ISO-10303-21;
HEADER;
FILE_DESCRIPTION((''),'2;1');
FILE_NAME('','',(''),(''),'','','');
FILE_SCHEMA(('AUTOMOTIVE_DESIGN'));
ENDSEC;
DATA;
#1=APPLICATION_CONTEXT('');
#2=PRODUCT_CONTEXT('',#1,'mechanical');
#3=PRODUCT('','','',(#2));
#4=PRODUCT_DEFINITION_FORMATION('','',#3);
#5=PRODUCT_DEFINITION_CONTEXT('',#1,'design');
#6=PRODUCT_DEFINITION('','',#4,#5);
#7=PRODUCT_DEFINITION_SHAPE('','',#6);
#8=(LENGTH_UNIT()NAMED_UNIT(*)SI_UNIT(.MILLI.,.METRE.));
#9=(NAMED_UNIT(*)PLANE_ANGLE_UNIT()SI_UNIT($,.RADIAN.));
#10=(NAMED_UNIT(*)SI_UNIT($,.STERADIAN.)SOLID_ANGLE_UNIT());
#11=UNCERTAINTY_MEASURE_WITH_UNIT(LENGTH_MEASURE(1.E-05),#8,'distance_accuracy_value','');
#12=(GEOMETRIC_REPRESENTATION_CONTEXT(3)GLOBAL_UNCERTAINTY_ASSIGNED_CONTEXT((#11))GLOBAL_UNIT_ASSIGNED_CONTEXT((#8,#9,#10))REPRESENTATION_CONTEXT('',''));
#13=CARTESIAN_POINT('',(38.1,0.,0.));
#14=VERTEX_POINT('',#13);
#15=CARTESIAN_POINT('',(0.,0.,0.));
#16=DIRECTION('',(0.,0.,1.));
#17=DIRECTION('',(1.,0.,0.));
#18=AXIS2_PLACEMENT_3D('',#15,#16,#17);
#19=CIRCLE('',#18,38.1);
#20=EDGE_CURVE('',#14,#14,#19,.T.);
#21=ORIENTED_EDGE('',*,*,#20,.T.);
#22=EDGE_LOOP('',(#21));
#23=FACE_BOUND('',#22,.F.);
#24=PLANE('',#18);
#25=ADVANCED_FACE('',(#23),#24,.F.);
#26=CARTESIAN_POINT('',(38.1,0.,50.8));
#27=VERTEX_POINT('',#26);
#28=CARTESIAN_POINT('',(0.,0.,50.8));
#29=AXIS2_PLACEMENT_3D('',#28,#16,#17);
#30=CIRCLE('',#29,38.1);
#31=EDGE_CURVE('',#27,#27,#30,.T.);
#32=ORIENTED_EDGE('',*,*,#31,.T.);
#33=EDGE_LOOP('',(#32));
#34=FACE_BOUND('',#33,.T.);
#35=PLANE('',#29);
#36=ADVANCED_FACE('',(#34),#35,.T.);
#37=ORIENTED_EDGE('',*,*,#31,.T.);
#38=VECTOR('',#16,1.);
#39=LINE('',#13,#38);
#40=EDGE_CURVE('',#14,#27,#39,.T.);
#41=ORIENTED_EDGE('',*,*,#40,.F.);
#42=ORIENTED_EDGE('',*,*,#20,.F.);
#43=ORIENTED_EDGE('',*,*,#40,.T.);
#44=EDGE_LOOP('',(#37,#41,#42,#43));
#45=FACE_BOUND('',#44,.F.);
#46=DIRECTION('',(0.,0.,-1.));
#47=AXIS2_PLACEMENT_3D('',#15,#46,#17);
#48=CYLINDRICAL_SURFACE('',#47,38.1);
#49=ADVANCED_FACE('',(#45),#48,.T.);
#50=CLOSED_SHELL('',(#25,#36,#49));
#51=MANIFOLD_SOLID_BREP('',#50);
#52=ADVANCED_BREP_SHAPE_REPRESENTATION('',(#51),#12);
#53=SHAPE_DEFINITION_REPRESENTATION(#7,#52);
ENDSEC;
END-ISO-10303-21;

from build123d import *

# Parameters (mm, degrees)
F0_R     = 38.1
F1_DEPTH = 50.8


# Not quite as in the source:
# - a feature of the source that left no trace in its solid (it failed there, or was rolled back) is left out
# - the program builds the solid bodies; features that only make, move or delete a surface that nothing else refers to are left out


with BuildPart() as f1:
    # F0 (on Top) → F1 (new body)
    with BuildSketch(Plane.XY):
        Circle(F0_R)
    extrude(amount=F1_DEPTH)


solid = f1.part
